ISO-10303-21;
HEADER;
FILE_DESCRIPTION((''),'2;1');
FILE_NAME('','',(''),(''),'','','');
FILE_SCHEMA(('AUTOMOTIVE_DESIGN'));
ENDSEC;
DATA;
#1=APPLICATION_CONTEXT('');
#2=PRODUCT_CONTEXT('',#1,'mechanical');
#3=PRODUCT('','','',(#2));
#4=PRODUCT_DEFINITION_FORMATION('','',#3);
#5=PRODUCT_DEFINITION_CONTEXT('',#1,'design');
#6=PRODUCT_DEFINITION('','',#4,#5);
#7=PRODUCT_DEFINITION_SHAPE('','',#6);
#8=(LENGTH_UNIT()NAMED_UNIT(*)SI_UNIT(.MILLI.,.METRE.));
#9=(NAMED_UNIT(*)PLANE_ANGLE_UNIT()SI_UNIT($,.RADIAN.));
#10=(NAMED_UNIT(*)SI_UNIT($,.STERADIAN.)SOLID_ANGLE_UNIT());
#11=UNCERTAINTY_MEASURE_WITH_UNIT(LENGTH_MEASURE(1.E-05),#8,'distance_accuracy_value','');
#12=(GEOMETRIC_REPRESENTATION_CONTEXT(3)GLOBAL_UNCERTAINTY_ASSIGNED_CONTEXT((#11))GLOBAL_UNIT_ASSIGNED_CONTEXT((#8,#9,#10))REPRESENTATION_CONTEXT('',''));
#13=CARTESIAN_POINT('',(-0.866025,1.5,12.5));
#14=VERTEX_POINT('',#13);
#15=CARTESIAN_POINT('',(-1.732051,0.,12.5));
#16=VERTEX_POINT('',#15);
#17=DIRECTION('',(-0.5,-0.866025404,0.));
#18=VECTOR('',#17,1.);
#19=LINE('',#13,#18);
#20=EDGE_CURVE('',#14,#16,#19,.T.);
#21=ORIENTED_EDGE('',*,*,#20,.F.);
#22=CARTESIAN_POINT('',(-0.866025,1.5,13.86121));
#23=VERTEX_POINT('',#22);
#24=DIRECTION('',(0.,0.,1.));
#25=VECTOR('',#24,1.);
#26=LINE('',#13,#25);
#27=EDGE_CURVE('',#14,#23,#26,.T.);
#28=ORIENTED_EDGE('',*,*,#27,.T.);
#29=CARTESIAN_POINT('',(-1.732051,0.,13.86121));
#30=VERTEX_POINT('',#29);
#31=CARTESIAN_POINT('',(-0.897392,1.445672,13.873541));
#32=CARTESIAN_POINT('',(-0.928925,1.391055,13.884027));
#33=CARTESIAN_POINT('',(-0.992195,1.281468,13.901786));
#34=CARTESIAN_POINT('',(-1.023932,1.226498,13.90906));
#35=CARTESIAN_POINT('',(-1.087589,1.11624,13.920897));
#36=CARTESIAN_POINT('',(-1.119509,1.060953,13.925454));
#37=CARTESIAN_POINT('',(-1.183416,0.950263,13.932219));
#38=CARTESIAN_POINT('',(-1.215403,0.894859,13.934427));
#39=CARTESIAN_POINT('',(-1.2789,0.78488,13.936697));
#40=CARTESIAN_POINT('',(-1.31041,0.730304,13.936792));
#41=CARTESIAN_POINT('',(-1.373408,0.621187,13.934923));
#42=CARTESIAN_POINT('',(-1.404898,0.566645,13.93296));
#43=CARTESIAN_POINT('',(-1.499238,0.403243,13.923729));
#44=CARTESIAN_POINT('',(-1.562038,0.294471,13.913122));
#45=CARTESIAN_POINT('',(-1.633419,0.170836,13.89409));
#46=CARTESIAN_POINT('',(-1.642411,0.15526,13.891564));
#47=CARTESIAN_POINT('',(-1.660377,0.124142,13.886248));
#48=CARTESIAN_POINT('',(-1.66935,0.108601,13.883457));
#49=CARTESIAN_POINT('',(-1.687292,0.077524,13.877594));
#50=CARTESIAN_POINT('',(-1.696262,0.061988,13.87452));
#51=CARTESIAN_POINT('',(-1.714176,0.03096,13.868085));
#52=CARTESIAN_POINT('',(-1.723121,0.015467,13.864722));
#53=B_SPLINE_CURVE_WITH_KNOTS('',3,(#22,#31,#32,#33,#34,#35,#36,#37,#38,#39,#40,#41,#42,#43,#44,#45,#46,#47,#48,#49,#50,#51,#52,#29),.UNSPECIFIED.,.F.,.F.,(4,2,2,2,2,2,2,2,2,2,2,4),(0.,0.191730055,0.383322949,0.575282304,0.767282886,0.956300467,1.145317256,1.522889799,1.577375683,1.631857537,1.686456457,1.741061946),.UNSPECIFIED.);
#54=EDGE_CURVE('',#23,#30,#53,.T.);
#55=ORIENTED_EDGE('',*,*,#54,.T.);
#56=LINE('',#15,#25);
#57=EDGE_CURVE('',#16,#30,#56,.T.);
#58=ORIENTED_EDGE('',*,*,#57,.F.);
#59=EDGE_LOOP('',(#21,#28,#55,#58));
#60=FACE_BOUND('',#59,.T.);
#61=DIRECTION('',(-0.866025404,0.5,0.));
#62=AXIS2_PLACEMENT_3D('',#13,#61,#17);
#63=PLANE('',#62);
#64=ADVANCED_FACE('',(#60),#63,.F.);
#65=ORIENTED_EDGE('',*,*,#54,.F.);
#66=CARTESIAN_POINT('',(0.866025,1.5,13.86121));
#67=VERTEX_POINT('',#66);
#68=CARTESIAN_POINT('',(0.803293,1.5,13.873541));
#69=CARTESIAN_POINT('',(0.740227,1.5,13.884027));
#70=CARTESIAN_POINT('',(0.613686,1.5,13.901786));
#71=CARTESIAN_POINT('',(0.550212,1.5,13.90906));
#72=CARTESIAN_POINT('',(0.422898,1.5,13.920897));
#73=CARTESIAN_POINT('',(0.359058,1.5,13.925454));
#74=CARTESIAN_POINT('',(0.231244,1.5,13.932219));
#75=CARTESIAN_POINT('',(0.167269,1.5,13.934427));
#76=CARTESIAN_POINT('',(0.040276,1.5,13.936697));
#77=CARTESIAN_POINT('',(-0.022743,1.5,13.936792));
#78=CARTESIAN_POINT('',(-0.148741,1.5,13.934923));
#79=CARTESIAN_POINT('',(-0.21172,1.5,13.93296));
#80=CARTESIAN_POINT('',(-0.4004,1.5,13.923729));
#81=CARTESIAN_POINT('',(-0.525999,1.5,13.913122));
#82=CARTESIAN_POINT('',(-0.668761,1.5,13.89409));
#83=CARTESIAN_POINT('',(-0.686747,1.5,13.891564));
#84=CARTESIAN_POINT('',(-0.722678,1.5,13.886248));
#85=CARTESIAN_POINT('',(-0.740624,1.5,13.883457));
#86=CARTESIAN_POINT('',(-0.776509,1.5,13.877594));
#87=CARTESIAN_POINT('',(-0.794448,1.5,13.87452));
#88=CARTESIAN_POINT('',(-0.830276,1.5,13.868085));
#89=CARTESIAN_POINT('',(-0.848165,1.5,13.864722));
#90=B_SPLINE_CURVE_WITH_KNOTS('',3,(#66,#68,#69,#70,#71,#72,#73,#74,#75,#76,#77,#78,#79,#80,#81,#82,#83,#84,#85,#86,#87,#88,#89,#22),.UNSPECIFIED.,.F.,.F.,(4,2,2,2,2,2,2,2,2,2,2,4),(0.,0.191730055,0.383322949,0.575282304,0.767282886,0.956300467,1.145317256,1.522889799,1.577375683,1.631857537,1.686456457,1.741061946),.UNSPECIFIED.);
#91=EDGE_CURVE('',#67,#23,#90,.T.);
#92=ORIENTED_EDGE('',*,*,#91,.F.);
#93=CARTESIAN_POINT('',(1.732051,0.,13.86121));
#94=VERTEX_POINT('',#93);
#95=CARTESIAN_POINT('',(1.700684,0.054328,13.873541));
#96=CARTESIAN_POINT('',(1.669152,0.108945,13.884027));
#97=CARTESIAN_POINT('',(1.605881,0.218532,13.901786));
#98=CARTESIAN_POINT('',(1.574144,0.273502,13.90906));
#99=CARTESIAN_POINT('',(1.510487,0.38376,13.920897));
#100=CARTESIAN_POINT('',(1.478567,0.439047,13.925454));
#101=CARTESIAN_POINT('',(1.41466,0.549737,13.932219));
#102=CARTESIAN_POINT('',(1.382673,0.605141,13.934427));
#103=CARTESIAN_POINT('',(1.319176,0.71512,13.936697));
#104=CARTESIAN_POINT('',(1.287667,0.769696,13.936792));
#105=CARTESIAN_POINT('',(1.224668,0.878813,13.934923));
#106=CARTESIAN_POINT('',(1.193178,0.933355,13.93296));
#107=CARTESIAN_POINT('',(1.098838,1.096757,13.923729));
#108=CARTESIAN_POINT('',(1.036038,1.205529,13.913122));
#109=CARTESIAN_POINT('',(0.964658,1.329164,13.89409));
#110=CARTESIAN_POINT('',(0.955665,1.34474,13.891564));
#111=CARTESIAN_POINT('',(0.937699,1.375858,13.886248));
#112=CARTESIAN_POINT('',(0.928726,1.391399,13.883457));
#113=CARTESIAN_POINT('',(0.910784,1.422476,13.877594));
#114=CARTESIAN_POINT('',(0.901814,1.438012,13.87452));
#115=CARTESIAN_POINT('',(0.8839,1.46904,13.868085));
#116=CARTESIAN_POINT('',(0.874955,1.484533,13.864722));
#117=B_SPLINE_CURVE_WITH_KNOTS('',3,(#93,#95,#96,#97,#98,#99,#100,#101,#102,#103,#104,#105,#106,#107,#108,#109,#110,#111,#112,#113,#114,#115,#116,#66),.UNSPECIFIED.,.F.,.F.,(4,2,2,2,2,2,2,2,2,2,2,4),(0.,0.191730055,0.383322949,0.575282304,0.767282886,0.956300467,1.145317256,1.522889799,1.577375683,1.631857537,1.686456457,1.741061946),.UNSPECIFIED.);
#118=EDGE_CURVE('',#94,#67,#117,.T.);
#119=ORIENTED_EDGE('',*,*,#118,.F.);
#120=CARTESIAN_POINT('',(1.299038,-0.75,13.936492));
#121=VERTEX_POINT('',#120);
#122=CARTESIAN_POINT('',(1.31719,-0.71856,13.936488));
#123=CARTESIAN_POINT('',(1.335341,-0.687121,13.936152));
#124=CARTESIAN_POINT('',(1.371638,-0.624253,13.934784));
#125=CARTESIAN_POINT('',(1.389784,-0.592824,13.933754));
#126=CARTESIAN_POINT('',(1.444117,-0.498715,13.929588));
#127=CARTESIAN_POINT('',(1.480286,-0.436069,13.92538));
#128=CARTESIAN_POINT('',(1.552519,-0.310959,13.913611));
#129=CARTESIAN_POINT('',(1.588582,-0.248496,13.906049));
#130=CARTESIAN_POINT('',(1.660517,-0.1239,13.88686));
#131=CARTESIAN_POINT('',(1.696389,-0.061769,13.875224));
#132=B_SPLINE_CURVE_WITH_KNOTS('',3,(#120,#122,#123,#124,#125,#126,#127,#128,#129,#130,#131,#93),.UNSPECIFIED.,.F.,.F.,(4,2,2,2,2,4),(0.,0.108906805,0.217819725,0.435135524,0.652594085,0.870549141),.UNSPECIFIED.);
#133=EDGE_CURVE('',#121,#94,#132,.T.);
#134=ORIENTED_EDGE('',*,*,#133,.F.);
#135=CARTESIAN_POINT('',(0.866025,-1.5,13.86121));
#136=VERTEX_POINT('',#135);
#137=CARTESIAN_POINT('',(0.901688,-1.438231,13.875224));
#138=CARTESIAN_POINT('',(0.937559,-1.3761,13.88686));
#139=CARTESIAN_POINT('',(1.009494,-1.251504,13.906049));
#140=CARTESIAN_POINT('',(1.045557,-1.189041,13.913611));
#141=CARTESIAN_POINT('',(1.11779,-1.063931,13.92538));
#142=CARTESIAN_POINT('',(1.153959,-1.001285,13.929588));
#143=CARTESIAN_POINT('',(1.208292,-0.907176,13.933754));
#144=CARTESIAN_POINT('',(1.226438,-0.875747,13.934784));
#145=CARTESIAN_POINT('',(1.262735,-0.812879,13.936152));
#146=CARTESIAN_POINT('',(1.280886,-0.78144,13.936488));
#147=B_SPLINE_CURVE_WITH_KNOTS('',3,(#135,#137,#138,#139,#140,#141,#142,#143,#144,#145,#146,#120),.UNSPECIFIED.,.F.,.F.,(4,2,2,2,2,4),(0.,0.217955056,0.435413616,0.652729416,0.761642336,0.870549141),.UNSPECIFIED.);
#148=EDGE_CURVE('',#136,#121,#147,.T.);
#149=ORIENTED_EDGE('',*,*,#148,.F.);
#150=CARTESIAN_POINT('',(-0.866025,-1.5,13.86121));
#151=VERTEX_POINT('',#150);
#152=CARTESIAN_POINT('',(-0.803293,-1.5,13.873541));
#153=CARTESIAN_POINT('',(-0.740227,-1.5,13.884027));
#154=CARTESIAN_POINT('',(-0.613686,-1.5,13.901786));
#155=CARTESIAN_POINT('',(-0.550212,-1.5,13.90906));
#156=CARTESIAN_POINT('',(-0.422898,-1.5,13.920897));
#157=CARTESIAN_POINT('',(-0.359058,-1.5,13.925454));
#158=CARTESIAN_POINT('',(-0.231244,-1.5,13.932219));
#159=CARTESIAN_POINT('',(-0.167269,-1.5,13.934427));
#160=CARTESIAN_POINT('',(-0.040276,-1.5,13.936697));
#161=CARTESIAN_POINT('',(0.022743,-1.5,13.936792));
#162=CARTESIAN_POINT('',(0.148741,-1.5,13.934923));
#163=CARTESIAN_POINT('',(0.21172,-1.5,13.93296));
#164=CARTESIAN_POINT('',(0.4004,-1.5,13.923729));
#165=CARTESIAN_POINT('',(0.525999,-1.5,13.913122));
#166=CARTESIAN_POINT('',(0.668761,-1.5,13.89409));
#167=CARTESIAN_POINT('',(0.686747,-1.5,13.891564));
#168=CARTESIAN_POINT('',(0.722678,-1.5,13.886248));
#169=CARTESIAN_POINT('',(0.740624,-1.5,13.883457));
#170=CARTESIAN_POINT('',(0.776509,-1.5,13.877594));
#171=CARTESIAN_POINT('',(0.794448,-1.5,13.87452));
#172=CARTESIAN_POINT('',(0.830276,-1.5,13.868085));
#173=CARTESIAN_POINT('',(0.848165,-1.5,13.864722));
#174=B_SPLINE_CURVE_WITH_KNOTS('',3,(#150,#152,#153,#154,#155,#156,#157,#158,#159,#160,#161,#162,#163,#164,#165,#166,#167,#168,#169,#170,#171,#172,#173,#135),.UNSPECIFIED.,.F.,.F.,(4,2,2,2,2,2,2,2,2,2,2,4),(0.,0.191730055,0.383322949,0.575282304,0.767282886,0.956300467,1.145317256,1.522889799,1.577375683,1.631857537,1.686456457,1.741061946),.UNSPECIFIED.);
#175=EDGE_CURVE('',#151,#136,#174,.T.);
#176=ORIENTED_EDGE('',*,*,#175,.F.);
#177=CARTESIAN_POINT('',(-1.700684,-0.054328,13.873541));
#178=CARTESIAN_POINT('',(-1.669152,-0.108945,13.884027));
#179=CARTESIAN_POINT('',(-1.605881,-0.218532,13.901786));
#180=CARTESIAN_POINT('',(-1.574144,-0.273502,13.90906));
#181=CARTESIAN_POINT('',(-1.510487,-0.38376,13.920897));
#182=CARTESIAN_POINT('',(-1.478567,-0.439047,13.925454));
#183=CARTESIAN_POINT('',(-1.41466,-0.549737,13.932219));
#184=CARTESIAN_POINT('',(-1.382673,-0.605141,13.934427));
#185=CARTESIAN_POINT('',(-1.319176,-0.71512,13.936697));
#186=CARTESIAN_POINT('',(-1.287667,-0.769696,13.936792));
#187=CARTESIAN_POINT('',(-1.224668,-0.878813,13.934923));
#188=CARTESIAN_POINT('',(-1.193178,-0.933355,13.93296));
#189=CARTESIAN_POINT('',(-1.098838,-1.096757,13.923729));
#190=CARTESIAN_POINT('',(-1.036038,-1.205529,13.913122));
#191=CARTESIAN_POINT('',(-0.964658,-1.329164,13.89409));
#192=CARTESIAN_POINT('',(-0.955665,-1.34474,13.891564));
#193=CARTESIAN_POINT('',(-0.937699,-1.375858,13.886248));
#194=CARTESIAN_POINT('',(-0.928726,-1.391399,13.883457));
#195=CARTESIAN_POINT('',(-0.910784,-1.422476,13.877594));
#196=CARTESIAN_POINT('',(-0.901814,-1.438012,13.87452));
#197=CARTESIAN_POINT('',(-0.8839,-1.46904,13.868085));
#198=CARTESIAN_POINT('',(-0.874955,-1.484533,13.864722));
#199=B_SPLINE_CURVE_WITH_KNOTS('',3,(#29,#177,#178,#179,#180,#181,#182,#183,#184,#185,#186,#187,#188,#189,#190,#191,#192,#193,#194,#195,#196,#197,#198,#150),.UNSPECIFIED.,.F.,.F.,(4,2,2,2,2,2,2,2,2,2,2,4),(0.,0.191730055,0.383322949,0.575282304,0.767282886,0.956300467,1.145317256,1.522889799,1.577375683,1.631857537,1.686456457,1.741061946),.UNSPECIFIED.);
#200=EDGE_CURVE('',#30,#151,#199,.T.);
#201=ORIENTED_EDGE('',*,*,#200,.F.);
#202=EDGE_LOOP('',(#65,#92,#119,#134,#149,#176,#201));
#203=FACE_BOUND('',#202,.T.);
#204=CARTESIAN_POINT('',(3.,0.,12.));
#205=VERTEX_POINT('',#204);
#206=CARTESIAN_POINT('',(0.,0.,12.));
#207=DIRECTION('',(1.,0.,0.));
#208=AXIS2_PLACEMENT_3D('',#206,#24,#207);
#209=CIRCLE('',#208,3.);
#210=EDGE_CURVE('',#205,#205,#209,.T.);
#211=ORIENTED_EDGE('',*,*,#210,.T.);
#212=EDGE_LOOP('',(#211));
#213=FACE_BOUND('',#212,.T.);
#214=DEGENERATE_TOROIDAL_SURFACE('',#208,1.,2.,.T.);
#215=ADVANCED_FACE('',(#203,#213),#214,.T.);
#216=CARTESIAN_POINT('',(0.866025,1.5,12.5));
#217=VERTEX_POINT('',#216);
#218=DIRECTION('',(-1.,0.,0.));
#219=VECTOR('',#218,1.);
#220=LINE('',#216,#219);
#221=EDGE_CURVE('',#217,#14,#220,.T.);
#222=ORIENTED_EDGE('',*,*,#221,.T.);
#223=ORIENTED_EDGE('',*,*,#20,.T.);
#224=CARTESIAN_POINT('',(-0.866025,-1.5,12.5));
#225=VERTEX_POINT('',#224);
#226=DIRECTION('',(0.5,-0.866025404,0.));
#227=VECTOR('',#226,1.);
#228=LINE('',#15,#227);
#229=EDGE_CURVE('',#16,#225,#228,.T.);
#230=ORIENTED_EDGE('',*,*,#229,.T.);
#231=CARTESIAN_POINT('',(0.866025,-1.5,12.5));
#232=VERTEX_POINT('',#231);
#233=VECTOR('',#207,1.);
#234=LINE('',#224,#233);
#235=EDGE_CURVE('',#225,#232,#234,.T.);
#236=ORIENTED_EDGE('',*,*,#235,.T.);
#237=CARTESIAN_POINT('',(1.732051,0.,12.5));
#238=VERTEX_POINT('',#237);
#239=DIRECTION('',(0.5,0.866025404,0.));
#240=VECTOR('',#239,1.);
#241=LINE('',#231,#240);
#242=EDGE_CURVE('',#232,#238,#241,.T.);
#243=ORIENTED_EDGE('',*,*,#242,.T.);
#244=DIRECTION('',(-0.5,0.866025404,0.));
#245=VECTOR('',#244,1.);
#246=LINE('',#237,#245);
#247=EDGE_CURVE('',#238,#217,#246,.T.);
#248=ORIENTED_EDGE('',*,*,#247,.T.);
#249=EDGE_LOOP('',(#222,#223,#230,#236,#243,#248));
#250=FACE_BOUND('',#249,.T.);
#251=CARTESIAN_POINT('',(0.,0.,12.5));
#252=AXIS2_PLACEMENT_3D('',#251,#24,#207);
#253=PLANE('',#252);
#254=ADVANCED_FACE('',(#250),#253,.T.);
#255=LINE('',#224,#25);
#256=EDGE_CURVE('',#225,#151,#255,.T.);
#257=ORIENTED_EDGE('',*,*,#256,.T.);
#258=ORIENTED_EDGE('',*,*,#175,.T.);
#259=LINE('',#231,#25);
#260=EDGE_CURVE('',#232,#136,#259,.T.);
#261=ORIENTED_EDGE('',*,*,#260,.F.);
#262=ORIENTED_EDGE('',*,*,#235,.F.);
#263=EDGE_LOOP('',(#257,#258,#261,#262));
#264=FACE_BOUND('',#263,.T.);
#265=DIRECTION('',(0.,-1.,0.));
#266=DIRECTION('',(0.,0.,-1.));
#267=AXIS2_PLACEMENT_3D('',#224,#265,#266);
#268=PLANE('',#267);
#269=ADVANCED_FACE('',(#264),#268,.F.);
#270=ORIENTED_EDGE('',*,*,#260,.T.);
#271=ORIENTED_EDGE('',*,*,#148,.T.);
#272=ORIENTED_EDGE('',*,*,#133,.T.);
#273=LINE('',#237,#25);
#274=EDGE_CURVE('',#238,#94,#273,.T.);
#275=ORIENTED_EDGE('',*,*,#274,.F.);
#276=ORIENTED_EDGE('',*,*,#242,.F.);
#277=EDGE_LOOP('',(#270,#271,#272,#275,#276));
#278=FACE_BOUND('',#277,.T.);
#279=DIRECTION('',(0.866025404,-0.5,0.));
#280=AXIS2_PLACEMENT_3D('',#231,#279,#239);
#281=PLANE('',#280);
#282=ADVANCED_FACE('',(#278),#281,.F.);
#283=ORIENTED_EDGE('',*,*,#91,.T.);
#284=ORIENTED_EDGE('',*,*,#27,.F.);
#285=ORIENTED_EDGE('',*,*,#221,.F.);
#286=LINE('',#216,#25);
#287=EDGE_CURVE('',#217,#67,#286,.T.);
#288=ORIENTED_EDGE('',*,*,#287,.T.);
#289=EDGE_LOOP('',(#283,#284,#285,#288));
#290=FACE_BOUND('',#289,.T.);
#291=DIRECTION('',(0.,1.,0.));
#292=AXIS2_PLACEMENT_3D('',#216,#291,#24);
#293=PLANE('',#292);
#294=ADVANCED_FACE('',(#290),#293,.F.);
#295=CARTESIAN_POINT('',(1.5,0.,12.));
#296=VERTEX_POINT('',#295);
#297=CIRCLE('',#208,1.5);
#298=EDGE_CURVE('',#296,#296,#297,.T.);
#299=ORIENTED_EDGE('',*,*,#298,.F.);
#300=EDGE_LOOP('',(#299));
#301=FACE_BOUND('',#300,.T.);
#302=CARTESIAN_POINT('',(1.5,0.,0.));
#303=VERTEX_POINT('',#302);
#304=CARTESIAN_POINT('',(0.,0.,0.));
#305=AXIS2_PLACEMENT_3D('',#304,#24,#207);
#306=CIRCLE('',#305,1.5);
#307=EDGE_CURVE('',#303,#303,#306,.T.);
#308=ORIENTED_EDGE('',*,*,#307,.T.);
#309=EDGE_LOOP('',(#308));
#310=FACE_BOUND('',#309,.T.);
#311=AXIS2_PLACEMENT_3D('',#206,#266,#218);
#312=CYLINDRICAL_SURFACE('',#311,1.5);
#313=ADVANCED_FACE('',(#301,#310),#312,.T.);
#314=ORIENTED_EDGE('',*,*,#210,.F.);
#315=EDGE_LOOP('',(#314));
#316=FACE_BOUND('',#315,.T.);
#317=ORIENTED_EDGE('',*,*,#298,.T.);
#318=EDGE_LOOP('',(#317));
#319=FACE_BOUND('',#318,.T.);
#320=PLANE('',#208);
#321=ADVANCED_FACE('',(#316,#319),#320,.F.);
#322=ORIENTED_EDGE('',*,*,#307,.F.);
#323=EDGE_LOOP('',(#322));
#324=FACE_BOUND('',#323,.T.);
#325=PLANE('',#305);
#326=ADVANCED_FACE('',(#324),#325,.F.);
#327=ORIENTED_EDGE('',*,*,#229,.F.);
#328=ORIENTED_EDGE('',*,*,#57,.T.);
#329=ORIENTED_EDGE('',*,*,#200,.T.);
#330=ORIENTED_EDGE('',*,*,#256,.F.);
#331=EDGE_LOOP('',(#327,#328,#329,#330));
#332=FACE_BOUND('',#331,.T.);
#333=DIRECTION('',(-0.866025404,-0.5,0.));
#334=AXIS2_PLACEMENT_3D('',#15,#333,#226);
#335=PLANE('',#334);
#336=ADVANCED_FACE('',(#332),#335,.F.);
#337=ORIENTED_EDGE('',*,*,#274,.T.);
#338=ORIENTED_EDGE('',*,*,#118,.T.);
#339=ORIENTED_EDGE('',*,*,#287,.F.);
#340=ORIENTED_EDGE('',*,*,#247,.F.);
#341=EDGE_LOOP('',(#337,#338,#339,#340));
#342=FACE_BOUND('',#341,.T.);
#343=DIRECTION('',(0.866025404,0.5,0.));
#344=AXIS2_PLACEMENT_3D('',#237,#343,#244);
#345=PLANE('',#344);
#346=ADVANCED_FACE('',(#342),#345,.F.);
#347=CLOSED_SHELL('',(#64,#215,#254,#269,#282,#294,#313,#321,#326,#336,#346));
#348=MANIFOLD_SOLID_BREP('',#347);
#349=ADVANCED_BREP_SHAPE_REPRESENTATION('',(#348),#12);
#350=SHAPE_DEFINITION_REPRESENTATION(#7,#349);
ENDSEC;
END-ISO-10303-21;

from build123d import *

# Parameters (mm, degrees)
SKETCH1_R           = 1.5
BOSS_EXTRUDE1_DEPTH = 12
SKETCH2_R           = 3
BOSS_EXTRUDE2_DEPTH = 2
CUT_EXTRUDE1_DEPTH  = 1.5
FILLET1_R           = 2


with BuildPart() as part:
    # Sketch1 → Boss-Extrude1 (new body)
    with BuildSketch(Plane.XY):
        Circle(SKETCH1_R)
    extrude(amount=BOSS_EXTRUDE1_DEPTH)

    # Sketch2 → Boss-Extrude2 (add)
    with BuildSketch(Plane.XY.offset(12)):
        Circle(SKETCH2_R)
    extrude(amount=BOSS_EXTRUDE2_DEPTH)

    # Sketch3 → Cut-Extrude1 (cut)
    with BuildSketch(Plane.XY.offset(14)):
        Polygon((-1.732050808, 0), (-0.866025404, -1.5), (0.866025404, -1.5), (1.732050808, 0), (0.866025404, 1.5), (-0.866025404, 1.5), align=None)
    extrude(amount=-CUT_EXTRUDE1_DEPTH, mode=Mode.SUBTRACT)

    # Fillet1
    # the kernel refuses this fillet: 2 mm, written as the material it takes off along each edge
    with BuildSketch(Plane(origin=(0, 0, 14), x_dir=(1, 0, 0), z_dir=(0, -1, 0))) as fillet1_piece_1:
        with BuildLine():
            CenterArc((3 - FILLET1_R, -FILLET1_R), FILLET1_R, 0, 90)
            Line((3 - FILLET1_R, 0), (3, 0))
            Line((3, 0), (3, -FILLET1_R))
        make_face()
    revolve(axis=Axis((0, 0, 14), (0, 0, 1)), mode=Mode.SUBTRACT)


solid = part.part
